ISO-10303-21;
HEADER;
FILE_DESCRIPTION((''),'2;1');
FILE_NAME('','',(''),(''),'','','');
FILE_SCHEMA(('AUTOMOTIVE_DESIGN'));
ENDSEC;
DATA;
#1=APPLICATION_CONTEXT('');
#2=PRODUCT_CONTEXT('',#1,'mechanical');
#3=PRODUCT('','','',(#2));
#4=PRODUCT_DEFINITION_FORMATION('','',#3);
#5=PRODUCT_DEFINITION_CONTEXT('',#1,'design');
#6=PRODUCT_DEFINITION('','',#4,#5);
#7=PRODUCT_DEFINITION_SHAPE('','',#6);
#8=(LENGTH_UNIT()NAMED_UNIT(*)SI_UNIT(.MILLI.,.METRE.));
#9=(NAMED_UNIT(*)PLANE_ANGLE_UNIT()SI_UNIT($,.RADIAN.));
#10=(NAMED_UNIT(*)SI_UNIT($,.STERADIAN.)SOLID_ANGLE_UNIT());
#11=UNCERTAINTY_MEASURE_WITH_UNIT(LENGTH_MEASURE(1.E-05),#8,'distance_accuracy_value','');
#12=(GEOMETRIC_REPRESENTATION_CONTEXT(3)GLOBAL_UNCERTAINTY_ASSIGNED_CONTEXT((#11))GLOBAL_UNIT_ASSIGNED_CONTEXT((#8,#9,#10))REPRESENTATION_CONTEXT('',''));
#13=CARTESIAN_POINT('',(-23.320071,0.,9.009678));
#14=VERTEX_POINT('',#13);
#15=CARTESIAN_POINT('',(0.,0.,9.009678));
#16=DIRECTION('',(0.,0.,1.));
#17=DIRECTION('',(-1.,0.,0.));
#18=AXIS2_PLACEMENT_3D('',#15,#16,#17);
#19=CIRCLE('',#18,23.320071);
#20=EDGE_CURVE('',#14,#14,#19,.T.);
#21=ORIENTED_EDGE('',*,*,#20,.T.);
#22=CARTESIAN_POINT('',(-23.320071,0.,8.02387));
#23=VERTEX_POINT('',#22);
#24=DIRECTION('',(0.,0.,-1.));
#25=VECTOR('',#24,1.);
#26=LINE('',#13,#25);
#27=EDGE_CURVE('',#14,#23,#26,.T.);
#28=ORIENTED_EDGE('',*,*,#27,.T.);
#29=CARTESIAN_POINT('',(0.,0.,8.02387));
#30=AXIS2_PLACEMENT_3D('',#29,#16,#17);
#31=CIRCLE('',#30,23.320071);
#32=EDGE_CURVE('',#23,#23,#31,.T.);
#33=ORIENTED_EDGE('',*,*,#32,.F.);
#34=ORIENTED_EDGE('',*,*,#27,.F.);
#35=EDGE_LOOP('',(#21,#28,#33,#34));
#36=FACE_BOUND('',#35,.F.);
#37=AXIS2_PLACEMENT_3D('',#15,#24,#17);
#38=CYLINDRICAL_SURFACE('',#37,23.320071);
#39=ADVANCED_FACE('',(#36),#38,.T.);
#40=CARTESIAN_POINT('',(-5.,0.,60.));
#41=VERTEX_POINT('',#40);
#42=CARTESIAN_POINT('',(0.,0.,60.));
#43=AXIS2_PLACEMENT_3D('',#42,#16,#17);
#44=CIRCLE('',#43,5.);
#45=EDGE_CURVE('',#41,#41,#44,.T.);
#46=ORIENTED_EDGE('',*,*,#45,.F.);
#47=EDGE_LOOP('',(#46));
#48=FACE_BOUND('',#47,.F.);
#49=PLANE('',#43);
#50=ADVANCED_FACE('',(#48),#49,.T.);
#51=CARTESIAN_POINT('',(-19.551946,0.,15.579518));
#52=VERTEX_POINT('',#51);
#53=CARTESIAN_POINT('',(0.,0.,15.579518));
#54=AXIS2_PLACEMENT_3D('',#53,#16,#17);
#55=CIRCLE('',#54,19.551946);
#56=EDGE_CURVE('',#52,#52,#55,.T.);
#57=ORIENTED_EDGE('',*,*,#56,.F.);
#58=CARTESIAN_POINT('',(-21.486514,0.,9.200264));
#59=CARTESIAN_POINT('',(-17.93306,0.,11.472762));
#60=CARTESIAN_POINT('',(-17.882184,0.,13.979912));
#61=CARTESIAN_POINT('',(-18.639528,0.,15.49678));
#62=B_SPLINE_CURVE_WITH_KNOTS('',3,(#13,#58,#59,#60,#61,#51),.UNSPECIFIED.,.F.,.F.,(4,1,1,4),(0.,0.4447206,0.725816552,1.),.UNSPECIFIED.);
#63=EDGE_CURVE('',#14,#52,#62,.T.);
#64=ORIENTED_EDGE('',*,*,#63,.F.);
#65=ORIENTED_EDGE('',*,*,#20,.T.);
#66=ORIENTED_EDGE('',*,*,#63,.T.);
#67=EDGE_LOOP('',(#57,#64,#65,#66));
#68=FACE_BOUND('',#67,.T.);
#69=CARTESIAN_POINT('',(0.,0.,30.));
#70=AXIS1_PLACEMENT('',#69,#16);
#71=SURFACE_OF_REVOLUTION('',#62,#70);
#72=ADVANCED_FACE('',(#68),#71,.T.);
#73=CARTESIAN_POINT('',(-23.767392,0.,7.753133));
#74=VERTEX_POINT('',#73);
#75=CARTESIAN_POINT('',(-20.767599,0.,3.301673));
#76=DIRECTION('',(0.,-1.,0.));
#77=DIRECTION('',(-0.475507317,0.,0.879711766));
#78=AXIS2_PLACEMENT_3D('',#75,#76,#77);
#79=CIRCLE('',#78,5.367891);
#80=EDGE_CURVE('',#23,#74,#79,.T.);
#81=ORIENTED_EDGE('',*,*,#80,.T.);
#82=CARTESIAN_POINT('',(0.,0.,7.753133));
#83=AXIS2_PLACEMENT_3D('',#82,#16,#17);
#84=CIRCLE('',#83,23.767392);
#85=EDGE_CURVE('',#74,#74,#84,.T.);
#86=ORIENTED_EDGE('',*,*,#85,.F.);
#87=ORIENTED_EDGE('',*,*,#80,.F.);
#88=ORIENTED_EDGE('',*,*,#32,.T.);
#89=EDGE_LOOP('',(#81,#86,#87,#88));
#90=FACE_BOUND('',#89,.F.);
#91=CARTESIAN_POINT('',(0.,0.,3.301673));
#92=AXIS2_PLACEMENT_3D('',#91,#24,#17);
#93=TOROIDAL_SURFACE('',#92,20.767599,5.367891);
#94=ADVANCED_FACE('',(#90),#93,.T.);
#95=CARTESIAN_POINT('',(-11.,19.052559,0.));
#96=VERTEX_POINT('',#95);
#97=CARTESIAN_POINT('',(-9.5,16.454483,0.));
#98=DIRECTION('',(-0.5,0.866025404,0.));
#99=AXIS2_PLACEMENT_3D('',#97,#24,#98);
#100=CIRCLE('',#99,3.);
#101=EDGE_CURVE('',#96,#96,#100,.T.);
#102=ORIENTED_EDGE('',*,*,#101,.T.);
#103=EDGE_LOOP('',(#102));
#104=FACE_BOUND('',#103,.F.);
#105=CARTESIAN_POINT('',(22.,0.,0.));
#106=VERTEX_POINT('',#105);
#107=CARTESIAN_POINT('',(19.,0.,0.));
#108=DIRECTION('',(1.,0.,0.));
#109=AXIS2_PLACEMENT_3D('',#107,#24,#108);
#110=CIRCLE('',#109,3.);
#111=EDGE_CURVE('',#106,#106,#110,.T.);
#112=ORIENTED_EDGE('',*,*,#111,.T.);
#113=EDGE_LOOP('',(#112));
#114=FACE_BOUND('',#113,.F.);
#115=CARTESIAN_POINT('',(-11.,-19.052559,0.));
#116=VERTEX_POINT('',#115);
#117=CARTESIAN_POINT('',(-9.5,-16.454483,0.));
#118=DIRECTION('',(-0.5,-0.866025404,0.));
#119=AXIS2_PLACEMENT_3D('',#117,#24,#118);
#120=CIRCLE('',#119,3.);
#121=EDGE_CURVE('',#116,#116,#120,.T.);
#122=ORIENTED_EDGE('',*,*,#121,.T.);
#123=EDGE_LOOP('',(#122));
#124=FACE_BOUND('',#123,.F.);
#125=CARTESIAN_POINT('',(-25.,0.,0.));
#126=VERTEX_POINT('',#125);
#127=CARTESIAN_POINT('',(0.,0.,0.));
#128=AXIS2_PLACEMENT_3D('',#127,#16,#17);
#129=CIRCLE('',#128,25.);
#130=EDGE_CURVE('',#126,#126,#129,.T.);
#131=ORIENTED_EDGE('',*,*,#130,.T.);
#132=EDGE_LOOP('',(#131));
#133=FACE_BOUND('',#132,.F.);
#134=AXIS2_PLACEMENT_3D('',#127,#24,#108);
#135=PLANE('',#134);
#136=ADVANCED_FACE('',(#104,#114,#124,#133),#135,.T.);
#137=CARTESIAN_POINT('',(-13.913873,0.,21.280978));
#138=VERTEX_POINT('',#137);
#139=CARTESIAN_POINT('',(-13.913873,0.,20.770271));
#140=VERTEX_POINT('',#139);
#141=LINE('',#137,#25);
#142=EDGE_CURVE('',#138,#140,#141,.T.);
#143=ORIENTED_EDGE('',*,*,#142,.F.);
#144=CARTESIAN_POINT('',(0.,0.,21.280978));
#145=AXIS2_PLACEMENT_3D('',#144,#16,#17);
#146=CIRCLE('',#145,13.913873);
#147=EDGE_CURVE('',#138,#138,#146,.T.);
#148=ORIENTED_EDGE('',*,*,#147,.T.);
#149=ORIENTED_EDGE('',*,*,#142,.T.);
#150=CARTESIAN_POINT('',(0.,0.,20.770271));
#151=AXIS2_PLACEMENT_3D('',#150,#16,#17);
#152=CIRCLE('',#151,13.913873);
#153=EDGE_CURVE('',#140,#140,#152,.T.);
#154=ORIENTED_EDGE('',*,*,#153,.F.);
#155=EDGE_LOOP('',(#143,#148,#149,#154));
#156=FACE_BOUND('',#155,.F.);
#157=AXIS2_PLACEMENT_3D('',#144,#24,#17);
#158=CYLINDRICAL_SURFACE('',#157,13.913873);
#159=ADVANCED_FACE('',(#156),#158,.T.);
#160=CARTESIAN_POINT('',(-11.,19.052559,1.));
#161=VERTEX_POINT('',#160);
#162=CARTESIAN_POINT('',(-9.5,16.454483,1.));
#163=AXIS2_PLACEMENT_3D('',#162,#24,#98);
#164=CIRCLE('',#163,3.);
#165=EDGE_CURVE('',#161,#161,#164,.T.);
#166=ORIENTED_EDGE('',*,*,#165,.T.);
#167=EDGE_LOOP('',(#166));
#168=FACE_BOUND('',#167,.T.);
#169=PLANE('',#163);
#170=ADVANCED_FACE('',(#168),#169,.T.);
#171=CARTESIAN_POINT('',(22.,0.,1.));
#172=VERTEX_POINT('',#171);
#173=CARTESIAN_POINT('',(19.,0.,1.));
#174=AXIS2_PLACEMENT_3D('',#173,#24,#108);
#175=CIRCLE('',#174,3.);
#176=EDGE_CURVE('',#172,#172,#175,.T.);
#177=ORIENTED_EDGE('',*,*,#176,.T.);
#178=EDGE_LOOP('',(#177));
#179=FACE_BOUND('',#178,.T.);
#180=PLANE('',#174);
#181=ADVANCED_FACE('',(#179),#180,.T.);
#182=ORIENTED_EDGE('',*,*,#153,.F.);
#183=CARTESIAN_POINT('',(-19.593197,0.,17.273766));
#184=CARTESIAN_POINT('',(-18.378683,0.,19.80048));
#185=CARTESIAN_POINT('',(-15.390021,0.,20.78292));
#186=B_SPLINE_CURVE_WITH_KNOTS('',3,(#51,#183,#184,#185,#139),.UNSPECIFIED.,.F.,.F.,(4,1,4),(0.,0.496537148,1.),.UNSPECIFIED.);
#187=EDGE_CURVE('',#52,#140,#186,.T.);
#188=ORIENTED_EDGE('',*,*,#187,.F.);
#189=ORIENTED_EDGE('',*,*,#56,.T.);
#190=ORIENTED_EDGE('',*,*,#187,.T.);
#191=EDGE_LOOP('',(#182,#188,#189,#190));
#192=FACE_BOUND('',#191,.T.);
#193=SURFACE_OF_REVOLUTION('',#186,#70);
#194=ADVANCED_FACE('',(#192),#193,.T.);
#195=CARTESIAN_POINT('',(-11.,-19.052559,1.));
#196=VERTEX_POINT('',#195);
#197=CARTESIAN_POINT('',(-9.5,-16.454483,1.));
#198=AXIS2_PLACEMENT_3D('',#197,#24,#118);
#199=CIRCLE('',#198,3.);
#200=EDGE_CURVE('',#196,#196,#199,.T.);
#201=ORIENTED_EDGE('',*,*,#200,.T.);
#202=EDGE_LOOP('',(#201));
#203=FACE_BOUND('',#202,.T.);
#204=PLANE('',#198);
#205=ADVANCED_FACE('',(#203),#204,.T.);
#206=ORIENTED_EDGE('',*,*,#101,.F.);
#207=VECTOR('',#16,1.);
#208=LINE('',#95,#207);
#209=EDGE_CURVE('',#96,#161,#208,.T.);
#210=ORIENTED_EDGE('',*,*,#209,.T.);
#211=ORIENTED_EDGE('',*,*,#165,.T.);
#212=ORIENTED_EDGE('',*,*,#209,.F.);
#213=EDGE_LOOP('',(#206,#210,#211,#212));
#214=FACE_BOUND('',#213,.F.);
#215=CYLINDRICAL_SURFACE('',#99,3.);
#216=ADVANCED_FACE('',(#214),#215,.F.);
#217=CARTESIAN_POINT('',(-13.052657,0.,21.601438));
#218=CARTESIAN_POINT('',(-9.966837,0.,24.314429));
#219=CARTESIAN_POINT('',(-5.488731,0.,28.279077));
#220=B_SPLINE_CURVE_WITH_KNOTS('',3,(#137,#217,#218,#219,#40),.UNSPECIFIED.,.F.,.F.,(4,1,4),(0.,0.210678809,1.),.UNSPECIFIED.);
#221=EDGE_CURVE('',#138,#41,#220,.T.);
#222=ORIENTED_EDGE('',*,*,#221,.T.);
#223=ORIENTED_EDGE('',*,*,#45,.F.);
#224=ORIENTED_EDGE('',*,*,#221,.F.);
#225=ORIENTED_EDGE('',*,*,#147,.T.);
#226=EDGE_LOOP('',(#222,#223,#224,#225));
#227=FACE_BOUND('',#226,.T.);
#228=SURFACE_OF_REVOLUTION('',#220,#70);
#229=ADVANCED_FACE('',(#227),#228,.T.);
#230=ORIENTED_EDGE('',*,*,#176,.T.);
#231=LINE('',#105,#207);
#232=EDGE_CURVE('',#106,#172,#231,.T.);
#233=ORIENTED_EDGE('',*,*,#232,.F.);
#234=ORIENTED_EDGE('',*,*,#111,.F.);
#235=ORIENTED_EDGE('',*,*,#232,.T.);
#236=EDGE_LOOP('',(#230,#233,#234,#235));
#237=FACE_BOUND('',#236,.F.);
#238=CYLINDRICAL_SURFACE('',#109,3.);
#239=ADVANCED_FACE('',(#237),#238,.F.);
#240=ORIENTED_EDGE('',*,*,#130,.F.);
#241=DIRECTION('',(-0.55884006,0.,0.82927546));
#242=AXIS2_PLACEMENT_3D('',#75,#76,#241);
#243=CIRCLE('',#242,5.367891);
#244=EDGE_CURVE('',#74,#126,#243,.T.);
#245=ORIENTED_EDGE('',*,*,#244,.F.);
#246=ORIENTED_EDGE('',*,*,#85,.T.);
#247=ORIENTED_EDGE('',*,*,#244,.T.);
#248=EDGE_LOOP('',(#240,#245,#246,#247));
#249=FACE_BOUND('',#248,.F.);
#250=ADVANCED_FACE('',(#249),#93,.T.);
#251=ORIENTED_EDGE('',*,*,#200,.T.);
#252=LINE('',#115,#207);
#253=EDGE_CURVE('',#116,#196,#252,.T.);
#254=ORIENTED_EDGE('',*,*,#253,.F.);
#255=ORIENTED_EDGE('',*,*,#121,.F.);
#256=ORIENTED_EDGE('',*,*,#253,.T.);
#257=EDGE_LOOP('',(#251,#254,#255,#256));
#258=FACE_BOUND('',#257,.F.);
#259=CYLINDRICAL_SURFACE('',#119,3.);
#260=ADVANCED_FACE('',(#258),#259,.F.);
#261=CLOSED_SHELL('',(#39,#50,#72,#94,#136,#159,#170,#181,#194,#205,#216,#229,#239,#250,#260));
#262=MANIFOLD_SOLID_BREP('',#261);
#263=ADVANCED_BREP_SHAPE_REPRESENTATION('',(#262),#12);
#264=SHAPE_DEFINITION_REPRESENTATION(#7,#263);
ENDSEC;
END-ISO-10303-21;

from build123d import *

# Parameters (mm, degrees)
F2_R            = 3
F3_DEPTH        = 1
F3_COPIES_COUNT = 3


# Not quite as in the source:
# - a pattern or mirror of a feature is missing from the dataset's text; its kind, count and spacing are read off the source's solid


with BuildPart() as f1:
    # F0 (on Front) → F1 (revolve)
    with BuildSketch(Plane.XZ):
        with BuildLine():
            ThreePointArc((0, 25), (-7.2712870514, 23.9192053509), (-13.9138726518, 20.7702707693))
            ThreePointArc((-13.9138726518, 20.7702707693), (-16.9329926398, 18.3922201015), (-19.5519464432, 15.5795182943))
            add(Edge.make_bspline(
                [(-23.3200709548, 9.0096776116), (-21.486513797, 9.2002640085), (-17.9330601868, 11.4727622575), (-17.882184425, 13.9799116864), (-18.6395279182, 15.496779924), (-19.5519464432, 15.5795182943)],
                knots=[0, 0, 0, 0, 0.4447205998, 0.7258165522, 1, 1, 1, 1], degree=3))
            Line((-23.3200709548, 9.0096776116), (-23.3200709548, 8.023869816))
            ThreePointArc((-23.3200709548, 8.023869816), (-18.0187025434, 7.9122934085), (-15.399707997, 3.3016726375))
            ThreePointArc((-15.399707997, 3.3016726375), (-15.6915120532, 1.5559363089), (-16.5351986885, 0))
            Line((-16.5351986885, 0), (0, 0))
            Line((0, 0), (0, 25))
        make_face()
        with BuildLine():
            Line((-13.9138726518, 21.280977875), (-13.9138726518, 20.7702707693))
            ThreePointArc((-13.9138726518, 20.7702707693), (-7.2712870514, 23.9192053509), (0, 25))
            Line((0, 25), (0, 60))
            Line((0, 60), (-5, 60))
            add(Edge.make_bspline(
                [(-13.9138726518, 21.280977875), (-13.0526568698, 21.6014376217), (-9.9668374865, 24.3144288022), (-5.488730967, 28.2790772617), (-5, 60)],
                knots=[0, 0, 0, 0, 0.2106788088, 1, 1, 1, 1], degree=3))
        make_face()
        with BuildLine():
            ThreePointArc((-19.5519464432, 15.5795182943), (-16.9329926398, 18.3922201015), (-13.9138726518, 20.7702707693))
            add(Edge.make_bspline(
                [(-19.5519464432, 15.5795182943), (-19.5931974036, 17.273765886), (-18.3786831103, 19.8004802455), (-15.3900210334, 20.7829197498), (-13.9138726518, 20.7702707693)],
                knots=[0, 0, 0, 0, 0.4965371483, 1, 1, 1, 1], degree=3))
        make_face()
        with BuildLine():
            ThreePointArc((-23.3200709548, 8.023869816), (-23.5470299297, 7.8939512806), (-23.7673920649, 7.753133201))
            ThreePointArc((-23.7673920649, 7.753133201), (-24.6899250872, 3.9252514809), (-25, 0))
            Line((-25, 0), (-16.5351986885, 0))
            ThreePointArc((-16.5351986885, 0), (-15.6915120532, 1.5559363089), (-15.399707997, 3.3016726375))
            ThreePointArc((-15.399707997, 3.3016726375), (-18.0187025434, 7.9122934085), (-23.3200709548, 8.023869816))
        make_face()
        with BuildLine():
            ThreePointArc((-25, 0), (-24.6899250872, 3.9252514809), (-23.7673920649, 7.753133201))
            ThreePointArc((-23.7673920649, 7.753133201), (-26.0689127538, 4.1444855759), (-25, 0))
        make_face()
    revolve(axis=Axis((0, 0, 30), (0, 0, 1)))

    # F2 (on face) → F3 (cut)
    with BuildSketch(Plane(origin=(0, 0, 0), x_dir=(1, 0, 0), z_dir=(0, 0, -1))):
        with Locations((19, 0)):
            Circle(F2_R)
    f3 = extrude(amount=-F3_DEPTH, mode=Mode.SUBTRACT)

    # F3_copies: F3 ×3 about axis
    f3_copies_axis = Axis((0, 0, 0), (0, 0, 1))
    for i in range(1, F3_COPIES_COUNT):
        add(f3.rotate(f3_copies_axis, i * 360 / F3_COPIES_COUNT), mode=Mode.SUBTRACT)


solid = f1.part
